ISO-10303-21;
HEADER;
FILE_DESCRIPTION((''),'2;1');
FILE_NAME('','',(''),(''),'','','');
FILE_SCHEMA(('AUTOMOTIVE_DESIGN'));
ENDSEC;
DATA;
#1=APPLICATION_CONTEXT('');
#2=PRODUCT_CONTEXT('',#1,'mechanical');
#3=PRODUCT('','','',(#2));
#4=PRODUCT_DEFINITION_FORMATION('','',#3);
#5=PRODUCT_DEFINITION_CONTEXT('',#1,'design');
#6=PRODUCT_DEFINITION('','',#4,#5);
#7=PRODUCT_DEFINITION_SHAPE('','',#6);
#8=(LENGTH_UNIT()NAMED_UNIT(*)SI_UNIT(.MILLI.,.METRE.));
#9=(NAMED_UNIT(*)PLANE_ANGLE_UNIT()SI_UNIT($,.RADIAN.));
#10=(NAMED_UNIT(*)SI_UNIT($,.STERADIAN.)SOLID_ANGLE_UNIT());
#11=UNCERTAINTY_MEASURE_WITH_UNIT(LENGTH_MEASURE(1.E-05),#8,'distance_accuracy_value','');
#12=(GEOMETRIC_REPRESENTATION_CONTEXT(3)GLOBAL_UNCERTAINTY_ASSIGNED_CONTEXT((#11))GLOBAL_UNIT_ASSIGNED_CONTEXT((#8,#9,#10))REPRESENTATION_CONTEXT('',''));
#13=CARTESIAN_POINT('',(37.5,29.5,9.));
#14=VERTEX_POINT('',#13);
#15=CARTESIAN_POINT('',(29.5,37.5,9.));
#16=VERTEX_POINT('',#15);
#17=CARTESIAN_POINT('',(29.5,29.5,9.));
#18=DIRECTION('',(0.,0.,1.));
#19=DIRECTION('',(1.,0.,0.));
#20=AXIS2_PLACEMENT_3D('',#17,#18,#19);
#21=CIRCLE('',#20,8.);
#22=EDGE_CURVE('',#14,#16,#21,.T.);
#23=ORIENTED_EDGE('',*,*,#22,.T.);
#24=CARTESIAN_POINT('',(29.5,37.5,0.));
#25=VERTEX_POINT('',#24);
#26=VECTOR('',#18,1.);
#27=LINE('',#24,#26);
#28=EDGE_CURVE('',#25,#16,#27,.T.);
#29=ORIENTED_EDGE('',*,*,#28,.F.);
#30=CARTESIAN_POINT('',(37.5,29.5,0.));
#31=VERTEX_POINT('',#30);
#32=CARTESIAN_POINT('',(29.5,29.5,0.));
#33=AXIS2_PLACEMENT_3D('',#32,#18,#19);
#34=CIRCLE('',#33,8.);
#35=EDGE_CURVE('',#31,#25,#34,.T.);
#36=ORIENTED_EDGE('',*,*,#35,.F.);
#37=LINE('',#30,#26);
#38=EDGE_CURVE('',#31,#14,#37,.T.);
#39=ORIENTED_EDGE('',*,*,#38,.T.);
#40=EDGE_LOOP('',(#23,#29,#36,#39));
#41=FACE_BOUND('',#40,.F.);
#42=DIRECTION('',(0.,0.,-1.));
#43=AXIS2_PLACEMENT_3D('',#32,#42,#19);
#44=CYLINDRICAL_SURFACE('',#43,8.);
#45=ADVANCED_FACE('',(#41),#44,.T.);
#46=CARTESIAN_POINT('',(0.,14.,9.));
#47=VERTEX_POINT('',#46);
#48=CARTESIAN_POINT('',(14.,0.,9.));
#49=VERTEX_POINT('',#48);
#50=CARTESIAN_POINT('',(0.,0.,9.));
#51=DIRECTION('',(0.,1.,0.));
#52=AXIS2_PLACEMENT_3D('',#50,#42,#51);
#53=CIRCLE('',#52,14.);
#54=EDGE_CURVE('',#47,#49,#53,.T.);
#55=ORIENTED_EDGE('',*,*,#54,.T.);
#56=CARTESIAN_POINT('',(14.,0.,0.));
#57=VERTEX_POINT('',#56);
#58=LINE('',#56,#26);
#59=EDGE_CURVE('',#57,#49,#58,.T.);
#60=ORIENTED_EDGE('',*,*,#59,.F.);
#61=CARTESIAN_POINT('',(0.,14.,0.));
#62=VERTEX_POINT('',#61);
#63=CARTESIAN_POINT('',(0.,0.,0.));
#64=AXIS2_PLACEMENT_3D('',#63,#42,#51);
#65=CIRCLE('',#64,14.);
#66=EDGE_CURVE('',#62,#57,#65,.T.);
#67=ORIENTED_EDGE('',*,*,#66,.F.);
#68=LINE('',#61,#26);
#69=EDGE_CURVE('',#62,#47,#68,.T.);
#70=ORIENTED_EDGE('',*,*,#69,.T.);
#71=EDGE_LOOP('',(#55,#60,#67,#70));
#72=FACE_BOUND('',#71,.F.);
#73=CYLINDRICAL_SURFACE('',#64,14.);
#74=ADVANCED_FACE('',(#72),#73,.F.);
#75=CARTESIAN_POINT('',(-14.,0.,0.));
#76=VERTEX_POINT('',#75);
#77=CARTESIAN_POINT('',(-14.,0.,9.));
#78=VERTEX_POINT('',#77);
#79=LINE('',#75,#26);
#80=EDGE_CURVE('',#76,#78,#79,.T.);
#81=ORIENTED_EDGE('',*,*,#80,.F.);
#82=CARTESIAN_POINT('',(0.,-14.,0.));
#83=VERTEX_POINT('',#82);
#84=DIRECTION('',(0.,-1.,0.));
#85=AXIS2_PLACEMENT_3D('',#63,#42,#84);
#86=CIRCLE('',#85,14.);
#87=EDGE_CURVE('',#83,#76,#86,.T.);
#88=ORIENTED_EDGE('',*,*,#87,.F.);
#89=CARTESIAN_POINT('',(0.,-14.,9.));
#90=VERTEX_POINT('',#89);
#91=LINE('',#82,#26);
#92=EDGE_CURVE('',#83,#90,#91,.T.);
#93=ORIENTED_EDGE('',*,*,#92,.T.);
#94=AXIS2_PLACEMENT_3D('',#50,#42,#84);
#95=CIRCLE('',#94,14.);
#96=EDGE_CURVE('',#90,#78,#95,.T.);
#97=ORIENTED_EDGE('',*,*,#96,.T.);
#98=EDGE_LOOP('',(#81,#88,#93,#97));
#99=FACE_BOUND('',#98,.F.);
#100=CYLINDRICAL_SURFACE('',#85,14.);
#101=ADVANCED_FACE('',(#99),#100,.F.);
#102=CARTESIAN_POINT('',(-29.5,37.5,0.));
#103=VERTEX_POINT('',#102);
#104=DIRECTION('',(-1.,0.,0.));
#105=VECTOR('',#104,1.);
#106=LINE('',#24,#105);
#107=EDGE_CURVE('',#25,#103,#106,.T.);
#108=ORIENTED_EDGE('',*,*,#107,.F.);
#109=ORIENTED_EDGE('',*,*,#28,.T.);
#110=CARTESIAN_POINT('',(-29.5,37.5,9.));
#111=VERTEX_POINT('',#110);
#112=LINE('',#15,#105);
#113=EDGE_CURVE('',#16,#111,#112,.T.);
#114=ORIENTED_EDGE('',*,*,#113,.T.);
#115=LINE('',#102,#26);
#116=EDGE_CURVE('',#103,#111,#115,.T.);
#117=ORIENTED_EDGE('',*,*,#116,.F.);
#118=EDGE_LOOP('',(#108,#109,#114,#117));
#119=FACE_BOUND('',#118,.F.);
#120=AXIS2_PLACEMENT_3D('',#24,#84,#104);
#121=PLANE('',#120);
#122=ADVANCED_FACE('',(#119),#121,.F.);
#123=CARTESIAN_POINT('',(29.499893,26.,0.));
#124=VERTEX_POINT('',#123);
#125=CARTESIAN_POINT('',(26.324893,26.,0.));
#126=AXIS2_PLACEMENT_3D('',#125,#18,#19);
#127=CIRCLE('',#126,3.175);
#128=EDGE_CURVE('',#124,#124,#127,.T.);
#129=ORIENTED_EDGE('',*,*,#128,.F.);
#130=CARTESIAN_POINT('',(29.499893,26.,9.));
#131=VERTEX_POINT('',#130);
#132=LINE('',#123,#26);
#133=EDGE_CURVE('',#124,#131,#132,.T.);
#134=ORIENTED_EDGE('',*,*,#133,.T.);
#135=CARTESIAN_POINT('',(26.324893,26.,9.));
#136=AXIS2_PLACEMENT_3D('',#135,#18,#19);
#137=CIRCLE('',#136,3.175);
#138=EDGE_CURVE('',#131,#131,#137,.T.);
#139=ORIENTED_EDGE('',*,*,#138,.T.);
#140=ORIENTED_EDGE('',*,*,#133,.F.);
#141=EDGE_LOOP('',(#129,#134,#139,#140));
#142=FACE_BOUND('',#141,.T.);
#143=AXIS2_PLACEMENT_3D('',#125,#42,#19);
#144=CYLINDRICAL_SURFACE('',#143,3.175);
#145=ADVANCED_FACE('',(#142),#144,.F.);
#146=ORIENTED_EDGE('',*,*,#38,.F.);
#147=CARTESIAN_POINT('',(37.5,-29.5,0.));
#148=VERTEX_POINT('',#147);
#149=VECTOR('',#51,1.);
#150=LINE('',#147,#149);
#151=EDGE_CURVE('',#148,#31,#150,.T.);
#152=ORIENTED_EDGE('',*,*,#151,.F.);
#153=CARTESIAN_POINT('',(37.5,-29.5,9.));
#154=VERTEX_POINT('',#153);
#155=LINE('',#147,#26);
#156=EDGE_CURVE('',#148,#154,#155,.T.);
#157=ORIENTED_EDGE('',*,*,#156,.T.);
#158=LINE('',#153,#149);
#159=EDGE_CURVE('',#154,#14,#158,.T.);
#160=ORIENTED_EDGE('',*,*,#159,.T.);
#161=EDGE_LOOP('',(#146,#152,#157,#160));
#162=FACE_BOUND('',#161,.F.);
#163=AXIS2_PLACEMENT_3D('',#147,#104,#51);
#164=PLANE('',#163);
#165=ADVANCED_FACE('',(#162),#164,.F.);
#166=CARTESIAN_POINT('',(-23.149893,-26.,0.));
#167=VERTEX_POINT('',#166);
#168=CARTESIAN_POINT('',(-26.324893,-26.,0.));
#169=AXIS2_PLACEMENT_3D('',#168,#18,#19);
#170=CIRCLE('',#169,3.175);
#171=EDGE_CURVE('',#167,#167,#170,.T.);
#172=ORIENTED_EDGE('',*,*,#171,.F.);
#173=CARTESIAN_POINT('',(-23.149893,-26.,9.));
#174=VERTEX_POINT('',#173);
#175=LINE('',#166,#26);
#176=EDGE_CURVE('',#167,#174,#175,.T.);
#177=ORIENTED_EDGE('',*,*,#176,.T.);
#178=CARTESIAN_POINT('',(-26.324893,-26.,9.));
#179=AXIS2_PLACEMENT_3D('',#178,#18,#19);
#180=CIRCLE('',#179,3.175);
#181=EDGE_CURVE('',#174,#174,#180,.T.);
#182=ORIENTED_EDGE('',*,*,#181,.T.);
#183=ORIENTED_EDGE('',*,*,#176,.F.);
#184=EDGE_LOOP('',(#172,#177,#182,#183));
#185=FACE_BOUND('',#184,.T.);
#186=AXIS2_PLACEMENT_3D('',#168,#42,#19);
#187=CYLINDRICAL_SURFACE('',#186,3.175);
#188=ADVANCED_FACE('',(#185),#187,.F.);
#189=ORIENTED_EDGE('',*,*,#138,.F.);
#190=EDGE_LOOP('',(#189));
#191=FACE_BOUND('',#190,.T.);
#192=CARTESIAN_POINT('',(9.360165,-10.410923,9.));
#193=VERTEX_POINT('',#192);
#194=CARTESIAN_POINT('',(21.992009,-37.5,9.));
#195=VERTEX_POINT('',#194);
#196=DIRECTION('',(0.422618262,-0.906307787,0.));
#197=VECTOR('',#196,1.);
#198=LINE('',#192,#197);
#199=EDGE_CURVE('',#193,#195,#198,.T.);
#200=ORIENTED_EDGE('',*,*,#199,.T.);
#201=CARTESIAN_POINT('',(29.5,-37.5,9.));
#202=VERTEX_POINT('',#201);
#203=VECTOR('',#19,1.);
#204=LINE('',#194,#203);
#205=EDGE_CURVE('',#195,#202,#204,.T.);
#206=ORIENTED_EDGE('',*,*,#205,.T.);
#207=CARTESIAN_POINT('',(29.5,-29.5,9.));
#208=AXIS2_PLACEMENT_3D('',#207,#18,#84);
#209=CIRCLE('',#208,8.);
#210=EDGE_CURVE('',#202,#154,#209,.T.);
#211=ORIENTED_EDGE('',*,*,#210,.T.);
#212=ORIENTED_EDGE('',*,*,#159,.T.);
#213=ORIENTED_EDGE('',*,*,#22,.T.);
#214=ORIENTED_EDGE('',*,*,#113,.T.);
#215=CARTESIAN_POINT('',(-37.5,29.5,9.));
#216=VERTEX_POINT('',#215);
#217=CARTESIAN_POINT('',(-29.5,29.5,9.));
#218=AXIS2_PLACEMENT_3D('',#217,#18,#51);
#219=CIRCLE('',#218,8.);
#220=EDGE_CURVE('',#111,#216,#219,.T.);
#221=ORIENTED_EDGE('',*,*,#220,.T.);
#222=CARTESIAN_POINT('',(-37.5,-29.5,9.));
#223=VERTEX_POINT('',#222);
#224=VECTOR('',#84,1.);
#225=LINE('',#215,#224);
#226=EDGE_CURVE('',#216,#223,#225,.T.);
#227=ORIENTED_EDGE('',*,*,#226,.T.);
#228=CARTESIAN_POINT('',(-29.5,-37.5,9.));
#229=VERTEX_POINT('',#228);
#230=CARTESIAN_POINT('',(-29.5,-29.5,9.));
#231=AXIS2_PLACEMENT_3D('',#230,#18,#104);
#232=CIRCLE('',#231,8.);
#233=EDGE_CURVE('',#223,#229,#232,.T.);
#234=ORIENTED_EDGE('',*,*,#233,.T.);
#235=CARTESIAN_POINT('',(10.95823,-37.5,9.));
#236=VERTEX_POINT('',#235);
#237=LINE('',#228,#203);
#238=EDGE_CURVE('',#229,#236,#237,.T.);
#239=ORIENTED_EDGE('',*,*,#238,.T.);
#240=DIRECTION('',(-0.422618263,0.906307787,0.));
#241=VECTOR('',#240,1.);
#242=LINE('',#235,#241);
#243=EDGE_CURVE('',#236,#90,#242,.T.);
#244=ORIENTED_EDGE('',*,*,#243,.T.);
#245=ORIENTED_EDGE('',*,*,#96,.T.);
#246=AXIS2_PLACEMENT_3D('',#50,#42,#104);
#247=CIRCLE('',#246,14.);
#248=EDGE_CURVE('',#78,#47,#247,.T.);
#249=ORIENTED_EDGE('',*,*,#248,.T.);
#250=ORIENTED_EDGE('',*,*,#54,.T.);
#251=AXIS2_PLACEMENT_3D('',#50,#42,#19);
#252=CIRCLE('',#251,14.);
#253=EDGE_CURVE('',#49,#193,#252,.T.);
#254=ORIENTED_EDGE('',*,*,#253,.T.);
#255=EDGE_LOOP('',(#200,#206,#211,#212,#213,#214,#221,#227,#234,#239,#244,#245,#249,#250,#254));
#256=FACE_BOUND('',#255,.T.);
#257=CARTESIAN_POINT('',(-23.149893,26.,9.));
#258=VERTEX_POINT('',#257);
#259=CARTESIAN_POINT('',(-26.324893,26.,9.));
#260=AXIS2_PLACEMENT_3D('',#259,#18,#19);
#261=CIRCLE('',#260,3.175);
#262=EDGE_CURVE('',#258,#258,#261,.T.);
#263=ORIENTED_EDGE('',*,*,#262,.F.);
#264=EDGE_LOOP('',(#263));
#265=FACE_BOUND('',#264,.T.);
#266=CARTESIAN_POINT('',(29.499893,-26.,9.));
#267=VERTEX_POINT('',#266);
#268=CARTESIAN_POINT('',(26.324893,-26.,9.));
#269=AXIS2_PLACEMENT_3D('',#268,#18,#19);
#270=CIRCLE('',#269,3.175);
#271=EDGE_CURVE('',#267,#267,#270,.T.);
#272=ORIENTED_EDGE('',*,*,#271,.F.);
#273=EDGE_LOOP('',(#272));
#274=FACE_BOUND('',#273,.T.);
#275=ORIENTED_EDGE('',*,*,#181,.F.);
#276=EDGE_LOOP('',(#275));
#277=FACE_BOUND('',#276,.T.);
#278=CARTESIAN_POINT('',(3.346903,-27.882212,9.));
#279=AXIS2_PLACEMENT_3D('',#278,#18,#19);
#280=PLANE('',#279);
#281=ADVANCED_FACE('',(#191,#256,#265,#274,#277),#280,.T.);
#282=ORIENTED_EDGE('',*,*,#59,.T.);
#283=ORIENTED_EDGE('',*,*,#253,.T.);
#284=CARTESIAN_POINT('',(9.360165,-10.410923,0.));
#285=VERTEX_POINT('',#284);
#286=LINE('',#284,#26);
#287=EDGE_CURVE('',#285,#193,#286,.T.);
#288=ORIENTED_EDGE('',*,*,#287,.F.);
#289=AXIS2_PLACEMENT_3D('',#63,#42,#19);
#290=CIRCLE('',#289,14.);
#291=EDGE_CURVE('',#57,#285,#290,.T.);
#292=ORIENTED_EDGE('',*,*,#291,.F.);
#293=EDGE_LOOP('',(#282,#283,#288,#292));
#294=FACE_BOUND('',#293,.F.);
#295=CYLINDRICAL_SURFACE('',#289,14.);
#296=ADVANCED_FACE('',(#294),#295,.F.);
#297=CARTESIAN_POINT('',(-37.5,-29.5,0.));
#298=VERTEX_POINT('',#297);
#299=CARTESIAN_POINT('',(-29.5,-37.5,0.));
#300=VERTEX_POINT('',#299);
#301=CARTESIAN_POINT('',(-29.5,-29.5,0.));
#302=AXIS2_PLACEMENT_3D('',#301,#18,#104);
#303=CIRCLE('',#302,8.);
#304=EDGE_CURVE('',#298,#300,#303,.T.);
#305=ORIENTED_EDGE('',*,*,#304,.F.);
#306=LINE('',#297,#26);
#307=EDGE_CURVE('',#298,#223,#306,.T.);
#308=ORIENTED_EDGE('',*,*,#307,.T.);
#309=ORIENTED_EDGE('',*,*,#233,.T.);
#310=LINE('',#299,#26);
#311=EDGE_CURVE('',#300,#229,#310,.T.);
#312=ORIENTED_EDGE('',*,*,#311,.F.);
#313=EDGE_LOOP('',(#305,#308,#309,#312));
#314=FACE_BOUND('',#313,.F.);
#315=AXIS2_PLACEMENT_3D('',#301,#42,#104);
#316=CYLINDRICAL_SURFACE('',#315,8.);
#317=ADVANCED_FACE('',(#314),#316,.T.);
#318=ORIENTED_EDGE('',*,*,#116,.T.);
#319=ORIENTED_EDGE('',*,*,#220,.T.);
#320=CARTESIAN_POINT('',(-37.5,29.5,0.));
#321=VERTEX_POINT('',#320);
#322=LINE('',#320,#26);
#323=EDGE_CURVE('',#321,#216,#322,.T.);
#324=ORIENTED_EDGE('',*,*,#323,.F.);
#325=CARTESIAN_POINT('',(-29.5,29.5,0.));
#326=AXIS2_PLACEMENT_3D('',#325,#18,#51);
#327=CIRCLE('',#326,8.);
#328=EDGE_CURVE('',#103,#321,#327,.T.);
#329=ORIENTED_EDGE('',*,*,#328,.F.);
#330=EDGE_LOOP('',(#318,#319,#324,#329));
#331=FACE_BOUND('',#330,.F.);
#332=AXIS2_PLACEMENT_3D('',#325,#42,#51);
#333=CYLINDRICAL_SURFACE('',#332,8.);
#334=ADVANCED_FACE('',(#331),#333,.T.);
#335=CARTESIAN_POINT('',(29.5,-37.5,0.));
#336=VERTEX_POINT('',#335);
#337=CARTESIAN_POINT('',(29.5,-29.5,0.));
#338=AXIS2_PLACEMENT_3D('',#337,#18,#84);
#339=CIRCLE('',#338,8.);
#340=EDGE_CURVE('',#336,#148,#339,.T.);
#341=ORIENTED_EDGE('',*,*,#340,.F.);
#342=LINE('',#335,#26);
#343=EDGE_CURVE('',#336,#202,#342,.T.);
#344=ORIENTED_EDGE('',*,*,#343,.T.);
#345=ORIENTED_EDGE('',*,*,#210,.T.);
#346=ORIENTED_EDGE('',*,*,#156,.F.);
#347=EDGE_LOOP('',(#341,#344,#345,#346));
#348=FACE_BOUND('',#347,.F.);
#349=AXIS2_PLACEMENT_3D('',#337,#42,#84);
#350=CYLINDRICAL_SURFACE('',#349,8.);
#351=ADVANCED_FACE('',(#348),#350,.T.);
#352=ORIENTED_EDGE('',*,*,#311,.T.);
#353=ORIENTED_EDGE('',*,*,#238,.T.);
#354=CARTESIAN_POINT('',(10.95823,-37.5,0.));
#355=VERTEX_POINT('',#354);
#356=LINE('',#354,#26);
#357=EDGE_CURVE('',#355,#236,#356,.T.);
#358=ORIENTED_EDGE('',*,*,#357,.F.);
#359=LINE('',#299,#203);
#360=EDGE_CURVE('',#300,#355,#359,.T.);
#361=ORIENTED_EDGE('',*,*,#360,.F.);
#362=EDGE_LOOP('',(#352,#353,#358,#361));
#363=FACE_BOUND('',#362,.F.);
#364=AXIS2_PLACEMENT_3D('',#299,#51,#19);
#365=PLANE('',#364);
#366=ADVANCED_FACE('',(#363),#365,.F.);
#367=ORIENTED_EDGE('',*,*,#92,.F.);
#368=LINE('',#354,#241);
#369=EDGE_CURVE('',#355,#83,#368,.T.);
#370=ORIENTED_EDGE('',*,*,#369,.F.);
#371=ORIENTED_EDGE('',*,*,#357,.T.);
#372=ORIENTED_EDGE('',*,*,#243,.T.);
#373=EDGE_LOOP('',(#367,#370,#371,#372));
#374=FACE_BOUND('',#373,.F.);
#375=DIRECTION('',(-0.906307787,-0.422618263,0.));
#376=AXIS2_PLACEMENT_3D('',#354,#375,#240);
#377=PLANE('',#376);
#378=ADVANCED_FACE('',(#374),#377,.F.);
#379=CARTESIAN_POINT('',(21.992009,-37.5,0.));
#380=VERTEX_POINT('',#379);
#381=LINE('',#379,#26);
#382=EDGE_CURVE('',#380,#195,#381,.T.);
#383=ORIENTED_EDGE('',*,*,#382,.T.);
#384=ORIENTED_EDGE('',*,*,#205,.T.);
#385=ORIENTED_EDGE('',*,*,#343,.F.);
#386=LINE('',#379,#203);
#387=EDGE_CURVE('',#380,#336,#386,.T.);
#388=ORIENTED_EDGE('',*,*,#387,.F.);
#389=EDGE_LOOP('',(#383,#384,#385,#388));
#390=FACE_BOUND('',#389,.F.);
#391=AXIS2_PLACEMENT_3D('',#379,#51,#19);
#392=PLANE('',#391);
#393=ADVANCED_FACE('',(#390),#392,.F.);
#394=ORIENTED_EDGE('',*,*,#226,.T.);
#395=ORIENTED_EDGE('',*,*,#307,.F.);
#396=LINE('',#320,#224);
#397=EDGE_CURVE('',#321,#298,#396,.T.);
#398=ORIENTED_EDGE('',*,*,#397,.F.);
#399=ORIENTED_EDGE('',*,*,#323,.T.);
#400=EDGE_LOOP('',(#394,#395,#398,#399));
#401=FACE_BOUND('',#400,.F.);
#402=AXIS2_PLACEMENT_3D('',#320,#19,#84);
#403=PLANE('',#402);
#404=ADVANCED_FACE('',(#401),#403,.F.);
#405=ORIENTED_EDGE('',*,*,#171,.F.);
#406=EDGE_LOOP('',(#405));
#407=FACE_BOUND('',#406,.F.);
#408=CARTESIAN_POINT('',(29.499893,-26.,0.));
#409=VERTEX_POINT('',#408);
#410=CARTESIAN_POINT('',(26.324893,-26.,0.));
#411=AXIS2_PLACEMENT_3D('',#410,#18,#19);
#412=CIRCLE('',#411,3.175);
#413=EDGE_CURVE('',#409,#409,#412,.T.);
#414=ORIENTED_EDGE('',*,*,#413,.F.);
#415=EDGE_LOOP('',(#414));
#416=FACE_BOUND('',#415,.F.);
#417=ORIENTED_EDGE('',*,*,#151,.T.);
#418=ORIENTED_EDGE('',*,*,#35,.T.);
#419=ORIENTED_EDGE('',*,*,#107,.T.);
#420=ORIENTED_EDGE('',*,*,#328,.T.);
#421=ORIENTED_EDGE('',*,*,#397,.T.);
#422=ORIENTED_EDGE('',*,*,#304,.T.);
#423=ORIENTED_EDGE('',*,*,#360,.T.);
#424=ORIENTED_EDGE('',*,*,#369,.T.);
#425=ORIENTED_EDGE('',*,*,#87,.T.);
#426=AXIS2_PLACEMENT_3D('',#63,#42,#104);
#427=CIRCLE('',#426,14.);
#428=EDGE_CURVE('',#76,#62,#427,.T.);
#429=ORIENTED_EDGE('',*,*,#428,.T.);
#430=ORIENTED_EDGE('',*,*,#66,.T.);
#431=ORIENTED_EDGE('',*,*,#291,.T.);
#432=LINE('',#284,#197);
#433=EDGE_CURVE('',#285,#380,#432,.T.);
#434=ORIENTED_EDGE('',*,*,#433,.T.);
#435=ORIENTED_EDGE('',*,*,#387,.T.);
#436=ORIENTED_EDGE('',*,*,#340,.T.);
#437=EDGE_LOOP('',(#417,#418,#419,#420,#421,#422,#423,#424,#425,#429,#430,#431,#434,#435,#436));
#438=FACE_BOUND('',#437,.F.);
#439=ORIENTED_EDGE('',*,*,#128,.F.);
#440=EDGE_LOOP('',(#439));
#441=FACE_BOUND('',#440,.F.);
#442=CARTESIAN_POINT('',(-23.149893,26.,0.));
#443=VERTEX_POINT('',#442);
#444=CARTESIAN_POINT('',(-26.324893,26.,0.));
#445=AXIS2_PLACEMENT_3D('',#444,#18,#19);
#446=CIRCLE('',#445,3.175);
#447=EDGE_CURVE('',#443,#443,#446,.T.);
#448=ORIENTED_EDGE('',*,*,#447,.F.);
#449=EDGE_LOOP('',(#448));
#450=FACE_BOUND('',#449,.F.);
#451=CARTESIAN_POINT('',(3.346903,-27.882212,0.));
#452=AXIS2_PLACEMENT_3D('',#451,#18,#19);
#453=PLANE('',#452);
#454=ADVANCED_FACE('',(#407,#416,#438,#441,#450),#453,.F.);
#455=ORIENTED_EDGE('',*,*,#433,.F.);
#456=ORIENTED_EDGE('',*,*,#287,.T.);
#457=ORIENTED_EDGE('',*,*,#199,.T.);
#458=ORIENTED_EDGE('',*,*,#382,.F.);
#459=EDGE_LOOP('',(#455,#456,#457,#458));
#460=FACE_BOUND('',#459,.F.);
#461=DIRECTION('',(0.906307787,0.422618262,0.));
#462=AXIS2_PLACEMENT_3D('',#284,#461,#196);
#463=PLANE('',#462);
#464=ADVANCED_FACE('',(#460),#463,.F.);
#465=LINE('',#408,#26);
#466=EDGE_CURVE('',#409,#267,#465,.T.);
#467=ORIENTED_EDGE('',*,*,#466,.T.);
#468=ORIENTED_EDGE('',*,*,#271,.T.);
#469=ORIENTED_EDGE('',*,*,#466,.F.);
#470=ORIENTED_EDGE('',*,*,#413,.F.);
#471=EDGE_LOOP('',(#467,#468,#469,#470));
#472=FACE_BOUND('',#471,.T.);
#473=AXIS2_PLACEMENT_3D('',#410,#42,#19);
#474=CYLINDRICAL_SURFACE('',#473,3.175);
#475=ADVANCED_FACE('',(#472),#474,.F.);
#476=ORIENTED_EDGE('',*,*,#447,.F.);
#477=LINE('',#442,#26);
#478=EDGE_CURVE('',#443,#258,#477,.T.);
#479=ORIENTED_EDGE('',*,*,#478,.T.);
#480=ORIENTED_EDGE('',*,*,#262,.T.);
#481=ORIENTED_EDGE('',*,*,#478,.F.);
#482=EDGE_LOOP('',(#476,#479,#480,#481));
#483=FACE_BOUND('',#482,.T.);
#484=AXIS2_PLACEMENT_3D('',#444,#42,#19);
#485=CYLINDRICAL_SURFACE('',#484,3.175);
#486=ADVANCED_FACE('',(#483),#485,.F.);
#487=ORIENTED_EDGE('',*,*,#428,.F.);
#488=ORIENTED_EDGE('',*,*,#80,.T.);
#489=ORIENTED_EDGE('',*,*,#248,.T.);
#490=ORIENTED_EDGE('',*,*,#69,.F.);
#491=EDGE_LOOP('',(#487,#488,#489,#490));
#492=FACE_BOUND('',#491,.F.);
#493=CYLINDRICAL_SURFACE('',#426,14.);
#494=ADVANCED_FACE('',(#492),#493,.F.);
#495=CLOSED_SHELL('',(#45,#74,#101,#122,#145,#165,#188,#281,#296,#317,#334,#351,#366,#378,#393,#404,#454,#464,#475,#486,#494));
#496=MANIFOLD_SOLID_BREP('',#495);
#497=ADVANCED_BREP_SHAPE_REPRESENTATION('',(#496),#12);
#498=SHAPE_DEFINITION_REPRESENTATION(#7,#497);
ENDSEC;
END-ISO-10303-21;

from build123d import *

# Parameters (mm, degrees)
F0_R     = 3.175
F1_DEPTH = 9


# Not quite as in the source:
# - ends of sketch curves that miss each other by under 0.0002 mm in the source are joined


with BuildPart() as f1:
    # F0 (on Top) → F1 (new body)
    with BuildSketch(Plane.XY):
        Polygon((10.95823, -37.5), (0, -14), (0, -37.5), align=None)
        with BuildLine():
            ThreePointArc((0, -14), (-9.8994949366, -9.8994949366), (-14, 0))
            Line((-14, 0), (-37.5, 0))
            Line((-37.5, 0), (-37.5, -29.5))
            ThreePointArc((-37.5, -29.5), (-35.1568542495, -35.1568542495), (-29.5, -37.5))
            Line((-29.5, -37.5), (0, -37.5))
            Line((0, -37.5), (0, -14))
        make_face()
        with Locations((-26.324893, -26)):
            Circle(F0_R, mode=Mode.SUBTRACT)
        with BuildLine():
            Line((37.5, 0), (14, 0))
            ThreePointArc((14, 0), (12.787539009, -5.6990215031), (9.3601648439, -10.4109228263))
            Line((9.3601648439, -10.4109228263), (21.992009, -37.5))
            Line((21.992009, -37.5), (29.5, -37.5))
            ThreePointArc((29.5, -37.5), (35.1568542495, -35.1568542495), (37.5, -29.5))
            Line((37.5, -29.5), (37.5, 0))
        make_face()
        with Locations((26.324893, -26)):
            Circle(F0_R, mode=Mode.SUBTRACT)
        with BuildLine():
            Line((29.5, 37.5), (0, 37.5))
            Line((0, 37.5), (0, 14))
            ThreePointArc((0, 14), (9.8994949366, 9.8994949366), (14, 0))
            Line((14, 0), (37.5, 0))
            Line((37.5, 0), (37.5, 29.5))
            ThreePointArc((37.5, 29.5), (35.1568542495, 35.1568542495), (29.5, 37.5))
        make_face()
        with Locations((26.324893, 26)):
            Circle(F0_R, mode=Mode.SUBTRACT)
        with BuildLine():
            Line((0, 14), (0, 37.5))
            Line((0, 37.5), (-29.5, 37.5))
            ThreePointArc((-29.5, 37.5), (-35.1568542495, 35.1568542495), (-37.5, 29.5))
            Line((-37.5, 29.5), (-37.5, 0))
            Line((-37.5, 0), (-14, 0))
            ThreePointArc((-14, 0), (-9.8994949366, 9.8994949366), (0, 14))
        make_face()
        with Locations((-26.324893, 26)):
            Circle(F0_R, mode=Mode.SUBTRACT)
    extrude(amount=F1_DEPTH)


solid = f1.part
